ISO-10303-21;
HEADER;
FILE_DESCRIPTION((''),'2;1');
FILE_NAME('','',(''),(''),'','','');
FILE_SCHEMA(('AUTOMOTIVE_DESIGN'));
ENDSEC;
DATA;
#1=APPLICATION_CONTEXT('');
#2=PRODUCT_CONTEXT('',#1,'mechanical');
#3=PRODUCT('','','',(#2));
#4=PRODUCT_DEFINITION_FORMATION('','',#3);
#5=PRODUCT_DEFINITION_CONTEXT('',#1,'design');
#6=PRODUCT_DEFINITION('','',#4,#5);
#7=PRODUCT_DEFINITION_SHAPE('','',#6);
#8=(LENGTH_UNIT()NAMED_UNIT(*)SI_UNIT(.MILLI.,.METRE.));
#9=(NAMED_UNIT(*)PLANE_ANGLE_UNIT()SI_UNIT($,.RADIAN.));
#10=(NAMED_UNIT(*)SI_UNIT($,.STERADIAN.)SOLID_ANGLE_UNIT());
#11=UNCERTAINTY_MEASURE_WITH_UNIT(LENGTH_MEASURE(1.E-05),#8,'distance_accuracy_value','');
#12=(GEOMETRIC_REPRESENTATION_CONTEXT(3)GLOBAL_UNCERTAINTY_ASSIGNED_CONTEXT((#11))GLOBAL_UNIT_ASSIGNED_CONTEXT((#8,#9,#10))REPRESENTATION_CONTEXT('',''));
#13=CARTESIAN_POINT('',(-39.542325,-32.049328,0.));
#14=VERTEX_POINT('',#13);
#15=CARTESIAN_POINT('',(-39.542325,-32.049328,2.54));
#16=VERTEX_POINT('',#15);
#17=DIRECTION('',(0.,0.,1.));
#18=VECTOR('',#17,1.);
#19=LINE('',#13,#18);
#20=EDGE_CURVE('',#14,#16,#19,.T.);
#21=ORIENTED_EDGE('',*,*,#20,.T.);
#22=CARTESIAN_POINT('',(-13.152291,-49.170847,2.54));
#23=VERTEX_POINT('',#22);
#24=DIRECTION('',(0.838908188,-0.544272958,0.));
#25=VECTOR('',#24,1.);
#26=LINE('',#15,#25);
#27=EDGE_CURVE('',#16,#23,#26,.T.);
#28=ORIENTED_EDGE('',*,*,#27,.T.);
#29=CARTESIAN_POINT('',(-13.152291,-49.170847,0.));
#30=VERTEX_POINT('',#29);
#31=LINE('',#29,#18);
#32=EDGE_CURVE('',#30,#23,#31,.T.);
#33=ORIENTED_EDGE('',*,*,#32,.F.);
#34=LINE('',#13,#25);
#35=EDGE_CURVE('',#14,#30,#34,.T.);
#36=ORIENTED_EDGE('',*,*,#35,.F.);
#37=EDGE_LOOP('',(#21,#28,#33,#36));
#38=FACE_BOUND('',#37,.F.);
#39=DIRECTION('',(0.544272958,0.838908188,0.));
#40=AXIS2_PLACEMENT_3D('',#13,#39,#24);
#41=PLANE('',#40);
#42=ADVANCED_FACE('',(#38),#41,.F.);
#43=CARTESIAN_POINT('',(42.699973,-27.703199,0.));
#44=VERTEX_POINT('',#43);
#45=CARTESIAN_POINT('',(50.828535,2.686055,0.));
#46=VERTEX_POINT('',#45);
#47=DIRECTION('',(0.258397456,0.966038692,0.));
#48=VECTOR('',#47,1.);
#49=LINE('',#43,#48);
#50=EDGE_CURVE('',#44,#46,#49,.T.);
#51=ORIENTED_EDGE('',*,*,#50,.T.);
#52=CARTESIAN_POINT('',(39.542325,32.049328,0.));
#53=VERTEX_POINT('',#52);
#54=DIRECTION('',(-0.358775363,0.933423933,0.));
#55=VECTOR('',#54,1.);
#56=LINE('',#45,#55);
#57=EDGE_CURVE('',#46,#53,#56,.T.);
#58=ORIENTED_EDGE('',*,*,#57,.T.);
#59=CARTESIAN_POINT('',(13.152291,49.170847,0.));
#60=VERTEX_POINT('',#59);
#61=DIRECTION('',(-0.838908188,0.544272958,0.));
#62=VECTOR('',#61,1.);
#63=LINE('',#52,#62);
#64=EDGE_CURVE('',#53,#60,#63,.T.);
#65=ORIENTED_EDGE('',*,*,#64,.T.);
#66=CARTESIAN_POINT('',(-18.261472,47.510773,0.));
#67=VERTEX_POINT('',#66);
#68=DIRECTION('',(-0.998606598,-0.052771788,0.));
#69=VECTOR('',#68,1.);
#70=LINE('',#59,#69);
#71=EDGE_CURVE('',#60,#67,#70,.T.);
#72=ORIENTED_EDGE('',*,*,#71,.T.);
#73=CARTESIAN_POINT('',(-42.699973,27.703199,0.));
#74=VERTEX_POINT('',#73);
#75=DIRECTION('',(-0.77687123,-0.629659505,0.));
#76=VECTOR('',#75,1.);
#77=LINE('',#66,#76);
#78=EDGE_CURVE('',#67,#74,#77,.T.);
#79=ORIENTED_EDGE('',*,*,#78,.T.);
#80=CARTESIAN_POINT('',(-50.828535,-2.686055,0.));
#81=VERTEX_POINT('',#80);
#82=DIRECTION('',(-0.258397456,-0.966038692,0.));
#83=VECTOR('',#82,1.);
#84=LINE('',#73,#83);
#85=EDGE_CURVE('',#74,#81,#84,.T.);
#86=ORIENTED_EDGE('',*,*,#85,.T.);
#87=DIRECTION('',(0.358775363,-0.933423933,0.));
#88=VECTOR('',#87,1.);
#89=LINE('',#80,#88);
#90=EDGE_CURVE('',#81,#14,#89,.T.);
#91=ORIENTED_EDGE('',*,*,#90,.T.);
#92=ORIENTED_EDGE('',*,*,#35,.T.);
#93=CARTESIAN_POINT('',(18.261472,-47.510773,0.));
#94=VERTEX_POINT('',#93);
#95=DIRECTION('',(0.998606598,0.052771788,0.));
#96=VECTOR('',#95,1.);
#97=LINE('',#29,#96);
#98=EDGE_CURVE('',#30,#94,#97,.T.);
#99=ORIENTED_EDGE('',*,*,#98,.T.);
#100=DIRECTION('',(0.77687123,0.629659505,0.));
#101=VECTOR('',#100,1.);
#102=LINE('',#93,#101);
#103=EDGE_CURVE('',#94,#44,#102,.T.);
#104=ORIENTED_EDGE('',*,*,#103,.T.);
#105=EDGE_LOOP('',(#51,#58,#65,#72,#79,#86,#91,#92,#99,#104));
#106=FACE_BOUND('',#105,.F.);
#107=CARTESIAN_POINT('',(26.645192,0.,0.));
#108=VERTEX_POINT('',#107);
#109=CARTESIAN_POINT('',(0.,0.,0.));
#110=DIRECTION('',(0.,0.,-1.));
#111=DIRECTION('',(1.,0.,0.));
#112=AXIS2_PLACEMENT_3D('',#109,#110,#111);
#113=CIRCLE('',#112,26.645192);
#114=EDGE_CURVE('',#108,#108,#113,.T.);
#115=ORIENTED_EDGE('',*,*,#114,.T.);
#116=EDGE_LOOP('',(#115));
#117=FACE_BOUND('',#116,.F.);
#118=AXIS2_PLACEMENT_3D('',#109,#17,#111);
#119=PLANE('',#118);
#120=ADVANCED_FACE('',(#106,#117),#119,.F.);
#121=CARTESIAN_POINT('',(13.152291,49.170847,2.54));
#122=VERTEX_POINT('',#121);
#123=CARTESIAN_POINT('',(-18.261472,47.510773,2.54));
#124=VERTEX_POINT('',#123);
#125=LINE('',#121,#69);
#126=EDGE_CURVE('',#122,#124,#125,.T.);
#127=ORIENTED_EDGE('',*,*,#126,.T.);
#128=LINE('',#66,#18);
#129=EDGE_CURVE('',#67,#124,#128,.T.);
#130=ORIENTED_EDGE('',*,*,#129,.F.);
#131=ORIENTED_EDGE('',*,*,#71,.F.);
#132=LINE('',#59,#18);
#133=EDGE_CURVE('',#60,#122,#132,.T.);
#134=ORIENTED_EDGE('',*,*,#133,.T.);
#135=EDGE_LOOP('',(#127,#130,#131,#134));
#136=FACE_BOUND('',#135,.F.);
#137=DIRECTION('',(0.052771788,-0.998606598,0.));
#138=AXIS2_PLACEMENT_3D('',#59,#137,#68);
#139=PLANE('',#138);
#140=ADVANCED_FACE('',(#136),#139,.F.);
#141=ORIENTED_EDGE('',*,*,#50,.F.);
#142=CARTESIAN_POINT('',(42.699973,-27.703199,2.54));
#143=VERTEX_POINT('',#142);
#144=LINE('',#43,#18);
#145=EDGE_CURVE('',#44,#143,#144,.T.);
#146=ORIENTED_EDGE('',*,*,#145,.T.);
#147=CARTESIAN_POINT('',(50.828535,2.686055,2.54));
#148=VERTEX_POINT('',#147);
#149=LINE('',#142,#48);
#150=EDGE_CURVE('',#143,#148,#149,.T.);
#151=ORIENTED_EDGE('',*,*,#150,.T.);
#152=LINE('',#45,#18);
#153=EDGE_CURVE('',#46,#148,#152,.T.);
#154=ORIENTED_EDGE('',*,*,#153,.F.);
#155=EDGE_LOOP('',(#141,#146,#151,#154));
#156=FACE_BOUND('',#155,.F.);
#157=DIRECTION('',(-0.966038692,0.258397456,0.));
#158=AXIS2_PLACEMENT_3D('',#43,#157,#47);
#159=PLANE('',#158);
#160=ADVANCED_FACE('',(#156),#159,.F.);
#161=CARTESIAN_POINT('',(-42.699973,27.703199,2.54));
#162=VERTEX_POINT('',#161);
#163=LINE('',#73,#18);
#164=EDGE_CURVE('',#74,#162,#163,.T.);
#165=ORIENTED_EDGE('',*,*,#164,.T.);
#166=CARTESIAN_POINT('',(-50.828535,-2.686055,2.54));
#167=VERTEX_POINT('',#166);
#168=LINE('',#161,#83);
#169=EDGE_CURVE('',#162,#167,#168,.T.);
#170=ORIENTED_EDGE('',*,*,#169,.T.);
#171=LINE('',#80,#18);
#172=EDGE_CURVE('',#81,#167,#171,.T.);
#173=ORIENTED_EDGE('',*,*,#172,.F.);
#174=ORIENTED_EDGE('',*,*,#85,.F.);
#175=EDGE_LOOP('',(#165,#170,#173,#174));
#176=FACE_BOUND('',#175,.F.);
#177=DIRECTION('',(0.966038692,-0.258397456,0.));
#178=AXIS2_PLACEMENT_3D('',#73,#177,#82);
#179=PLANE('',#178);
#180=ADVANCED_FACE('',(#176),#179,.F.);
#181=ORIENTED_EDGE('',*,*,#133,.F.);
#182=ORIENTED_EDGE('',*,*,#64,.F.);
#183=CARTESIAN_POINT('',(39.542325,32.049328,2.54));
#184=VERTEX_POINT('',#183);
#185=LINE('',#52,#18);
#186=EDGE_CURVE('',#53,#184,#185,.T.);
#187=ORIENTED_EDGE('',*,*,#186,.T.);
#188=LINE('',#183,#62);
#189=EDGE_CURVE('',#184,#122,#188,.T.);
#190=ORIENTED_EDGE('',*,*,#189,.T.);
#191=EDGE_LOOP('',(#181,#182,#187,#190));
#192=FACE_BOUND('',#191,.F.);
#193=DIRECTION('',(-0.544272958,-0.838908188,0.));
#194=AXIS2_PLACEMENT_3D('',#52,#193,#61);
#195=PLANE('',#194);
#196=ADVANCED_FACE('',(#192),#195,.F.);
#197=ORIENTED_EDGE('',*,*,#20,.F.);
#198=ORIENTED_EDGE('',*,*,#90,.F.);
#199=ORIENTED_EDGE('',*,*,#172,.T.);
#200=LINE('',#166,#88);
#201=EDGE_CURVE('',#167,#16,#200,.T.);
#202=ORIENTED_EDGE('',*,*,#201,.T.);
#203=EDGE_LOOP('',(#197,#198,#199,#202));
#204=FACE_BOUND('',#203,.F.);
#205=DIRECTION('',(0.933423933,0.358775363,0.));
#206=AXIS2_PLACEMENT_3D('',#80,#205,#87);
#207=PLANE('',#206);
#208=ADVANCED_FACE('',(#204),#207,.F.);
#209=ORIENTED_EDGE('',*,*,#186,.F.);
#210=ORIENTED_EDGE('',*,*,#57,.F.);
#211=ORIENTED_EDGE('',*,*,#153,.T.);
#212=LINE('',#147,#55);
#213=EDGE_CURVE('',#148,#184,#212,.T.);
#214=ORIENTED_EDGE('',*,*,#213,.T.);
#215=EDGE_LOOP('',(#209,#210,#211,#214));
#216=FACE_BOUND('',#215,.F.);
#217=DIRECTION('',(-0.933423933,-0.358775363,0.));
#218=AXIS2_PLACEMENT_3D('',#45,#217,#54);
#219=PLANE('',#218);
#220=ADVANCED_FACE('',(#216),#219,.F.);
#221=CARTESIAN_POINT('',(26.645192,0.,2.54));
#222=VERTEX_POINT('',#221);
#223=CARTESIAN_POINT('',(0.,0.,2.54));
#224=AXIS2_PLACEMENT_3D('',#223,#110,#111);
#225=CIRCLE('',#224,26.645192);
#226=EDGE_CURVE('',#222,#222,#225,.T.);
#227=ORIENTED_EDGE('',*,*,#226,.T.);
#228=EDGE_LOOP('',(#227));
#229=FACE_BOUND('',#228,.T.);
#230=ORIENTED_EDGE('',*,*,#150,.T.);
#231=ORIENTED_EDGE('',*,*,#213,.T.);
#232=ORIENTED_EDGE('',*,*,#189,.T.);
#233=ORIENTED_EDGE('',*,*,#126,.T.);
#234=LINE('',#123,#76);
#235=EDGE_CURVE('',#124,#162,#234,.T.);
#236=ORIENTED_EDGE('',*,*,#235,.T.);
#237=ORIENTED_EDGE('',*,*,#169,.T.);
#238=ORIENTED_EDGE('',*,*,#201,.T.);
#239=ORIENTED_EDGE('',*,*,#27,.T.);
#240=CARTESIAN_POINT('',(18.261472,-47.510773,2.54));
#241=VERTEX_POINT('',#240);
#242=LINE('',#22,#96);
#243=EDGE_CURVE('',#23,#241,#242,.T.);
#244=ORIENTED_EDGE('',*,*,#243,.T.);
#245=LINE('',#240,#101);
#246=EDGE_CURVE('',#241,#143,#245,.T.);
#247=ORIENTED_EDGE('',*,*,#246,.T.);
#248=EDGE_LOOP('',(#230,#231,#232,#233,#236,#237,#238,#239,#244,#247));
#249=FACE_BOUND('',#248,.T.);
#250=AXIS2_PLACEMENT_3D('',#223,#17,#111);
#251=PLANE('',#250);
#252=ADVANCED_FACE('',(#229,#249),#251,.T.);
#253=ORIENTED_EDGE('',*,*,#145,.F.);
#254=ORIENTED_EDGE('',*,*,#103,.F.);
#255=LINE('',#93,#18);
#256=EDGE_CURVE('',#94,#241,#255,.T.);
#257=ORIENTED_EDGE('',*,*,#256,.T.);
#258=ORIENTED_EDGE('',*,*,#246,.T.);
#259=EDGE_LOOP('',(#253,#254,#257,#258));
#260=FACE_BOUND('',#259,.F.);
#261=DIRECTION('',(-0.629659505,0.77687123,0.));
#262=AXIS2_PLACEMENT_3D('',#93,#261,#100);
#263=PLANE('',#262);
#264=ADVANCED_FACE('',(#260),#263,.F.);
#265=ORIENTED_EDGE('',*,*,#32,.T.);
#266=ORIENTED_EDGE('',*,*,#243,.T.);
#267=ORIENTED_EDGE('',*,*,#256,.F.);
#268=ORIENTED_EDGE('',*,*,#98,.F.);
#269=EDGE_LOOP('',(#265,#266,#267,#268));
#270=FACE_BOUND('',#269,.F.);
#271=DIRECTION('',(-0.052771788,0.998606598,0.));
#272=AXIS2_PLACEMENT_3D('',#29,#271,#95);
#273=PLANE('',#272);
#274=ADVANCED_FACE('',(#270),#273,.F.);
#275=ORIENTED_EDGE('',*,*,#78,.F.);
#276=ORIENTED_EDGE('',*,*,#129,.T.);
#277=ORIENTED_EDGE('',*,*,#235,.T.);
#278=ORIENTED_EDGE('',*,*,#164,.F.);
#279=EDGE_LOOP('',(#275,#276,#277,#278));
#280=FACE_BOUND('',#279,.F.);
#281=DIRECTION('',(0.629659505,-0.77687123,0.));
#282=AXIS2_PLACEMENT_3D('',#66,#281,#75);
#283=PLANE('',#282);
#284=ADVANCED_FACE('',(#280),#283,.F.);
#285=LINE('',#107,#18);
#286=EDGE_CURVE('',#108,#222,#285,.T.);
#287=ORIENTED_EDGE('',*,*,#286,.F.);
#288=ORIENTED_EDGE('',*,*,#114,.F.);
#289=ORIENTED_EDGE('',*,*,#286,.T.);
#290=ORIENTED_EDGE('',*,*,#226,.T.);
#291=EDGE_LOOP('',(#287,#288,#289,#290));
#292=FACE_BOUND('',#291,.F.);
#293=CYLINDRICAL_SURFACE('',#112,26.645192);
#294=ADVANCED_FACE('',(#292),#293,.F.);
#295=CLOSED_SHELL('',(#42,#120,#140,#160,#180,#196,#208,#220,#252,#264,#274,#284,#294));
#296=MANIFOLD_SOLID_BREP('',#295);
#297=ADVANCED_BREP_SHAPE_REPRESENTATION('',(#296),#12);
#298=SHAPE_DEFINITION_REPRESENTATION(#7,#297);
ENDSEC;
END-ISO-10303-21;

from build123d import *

# Parameters (mm, degrees)
F3_DEPTH = 2.54
F4_R     = 26.6451921389
F5_DEPTH = 25.4


# Not quite as in the source:
# - the program builds the solid bodies; features that only make, move or delete a surface that nothing else refers to are left out


with BuildPart() as f3:
    # F0 (on Top) → F3 (new body)
    with BuildSketch(Plane.XY):
        Polygon((13.1522906624, 49.1708465148), (-18.2614717633, 47.5107729435), (-42.69997266, 27.7031989396), (-50.8285353193, -2.6860554622), (-39.542325085, -32.049327973), (-13.1522906624, -49.1708465148), (18.2614717633, -47.5107729435), (42.69997266, -27.7031989396), (50.8285353193, 2.6860554622), (39.542325085, 32.049327973), align=None)
    extrude(amount=F3_DEPTH)

    # F4 (on face) → F5 (cut)
    with BuildSketch(Plane(origin=(0, 0, 0), x_dir=(1, 0, 0), z_dir=(0, 0, -1))):
        Circle(F4_R)
    extrude(amount=-F5_DEPTH, mode=Mode.SUBTRACT)


solid = f3.part
